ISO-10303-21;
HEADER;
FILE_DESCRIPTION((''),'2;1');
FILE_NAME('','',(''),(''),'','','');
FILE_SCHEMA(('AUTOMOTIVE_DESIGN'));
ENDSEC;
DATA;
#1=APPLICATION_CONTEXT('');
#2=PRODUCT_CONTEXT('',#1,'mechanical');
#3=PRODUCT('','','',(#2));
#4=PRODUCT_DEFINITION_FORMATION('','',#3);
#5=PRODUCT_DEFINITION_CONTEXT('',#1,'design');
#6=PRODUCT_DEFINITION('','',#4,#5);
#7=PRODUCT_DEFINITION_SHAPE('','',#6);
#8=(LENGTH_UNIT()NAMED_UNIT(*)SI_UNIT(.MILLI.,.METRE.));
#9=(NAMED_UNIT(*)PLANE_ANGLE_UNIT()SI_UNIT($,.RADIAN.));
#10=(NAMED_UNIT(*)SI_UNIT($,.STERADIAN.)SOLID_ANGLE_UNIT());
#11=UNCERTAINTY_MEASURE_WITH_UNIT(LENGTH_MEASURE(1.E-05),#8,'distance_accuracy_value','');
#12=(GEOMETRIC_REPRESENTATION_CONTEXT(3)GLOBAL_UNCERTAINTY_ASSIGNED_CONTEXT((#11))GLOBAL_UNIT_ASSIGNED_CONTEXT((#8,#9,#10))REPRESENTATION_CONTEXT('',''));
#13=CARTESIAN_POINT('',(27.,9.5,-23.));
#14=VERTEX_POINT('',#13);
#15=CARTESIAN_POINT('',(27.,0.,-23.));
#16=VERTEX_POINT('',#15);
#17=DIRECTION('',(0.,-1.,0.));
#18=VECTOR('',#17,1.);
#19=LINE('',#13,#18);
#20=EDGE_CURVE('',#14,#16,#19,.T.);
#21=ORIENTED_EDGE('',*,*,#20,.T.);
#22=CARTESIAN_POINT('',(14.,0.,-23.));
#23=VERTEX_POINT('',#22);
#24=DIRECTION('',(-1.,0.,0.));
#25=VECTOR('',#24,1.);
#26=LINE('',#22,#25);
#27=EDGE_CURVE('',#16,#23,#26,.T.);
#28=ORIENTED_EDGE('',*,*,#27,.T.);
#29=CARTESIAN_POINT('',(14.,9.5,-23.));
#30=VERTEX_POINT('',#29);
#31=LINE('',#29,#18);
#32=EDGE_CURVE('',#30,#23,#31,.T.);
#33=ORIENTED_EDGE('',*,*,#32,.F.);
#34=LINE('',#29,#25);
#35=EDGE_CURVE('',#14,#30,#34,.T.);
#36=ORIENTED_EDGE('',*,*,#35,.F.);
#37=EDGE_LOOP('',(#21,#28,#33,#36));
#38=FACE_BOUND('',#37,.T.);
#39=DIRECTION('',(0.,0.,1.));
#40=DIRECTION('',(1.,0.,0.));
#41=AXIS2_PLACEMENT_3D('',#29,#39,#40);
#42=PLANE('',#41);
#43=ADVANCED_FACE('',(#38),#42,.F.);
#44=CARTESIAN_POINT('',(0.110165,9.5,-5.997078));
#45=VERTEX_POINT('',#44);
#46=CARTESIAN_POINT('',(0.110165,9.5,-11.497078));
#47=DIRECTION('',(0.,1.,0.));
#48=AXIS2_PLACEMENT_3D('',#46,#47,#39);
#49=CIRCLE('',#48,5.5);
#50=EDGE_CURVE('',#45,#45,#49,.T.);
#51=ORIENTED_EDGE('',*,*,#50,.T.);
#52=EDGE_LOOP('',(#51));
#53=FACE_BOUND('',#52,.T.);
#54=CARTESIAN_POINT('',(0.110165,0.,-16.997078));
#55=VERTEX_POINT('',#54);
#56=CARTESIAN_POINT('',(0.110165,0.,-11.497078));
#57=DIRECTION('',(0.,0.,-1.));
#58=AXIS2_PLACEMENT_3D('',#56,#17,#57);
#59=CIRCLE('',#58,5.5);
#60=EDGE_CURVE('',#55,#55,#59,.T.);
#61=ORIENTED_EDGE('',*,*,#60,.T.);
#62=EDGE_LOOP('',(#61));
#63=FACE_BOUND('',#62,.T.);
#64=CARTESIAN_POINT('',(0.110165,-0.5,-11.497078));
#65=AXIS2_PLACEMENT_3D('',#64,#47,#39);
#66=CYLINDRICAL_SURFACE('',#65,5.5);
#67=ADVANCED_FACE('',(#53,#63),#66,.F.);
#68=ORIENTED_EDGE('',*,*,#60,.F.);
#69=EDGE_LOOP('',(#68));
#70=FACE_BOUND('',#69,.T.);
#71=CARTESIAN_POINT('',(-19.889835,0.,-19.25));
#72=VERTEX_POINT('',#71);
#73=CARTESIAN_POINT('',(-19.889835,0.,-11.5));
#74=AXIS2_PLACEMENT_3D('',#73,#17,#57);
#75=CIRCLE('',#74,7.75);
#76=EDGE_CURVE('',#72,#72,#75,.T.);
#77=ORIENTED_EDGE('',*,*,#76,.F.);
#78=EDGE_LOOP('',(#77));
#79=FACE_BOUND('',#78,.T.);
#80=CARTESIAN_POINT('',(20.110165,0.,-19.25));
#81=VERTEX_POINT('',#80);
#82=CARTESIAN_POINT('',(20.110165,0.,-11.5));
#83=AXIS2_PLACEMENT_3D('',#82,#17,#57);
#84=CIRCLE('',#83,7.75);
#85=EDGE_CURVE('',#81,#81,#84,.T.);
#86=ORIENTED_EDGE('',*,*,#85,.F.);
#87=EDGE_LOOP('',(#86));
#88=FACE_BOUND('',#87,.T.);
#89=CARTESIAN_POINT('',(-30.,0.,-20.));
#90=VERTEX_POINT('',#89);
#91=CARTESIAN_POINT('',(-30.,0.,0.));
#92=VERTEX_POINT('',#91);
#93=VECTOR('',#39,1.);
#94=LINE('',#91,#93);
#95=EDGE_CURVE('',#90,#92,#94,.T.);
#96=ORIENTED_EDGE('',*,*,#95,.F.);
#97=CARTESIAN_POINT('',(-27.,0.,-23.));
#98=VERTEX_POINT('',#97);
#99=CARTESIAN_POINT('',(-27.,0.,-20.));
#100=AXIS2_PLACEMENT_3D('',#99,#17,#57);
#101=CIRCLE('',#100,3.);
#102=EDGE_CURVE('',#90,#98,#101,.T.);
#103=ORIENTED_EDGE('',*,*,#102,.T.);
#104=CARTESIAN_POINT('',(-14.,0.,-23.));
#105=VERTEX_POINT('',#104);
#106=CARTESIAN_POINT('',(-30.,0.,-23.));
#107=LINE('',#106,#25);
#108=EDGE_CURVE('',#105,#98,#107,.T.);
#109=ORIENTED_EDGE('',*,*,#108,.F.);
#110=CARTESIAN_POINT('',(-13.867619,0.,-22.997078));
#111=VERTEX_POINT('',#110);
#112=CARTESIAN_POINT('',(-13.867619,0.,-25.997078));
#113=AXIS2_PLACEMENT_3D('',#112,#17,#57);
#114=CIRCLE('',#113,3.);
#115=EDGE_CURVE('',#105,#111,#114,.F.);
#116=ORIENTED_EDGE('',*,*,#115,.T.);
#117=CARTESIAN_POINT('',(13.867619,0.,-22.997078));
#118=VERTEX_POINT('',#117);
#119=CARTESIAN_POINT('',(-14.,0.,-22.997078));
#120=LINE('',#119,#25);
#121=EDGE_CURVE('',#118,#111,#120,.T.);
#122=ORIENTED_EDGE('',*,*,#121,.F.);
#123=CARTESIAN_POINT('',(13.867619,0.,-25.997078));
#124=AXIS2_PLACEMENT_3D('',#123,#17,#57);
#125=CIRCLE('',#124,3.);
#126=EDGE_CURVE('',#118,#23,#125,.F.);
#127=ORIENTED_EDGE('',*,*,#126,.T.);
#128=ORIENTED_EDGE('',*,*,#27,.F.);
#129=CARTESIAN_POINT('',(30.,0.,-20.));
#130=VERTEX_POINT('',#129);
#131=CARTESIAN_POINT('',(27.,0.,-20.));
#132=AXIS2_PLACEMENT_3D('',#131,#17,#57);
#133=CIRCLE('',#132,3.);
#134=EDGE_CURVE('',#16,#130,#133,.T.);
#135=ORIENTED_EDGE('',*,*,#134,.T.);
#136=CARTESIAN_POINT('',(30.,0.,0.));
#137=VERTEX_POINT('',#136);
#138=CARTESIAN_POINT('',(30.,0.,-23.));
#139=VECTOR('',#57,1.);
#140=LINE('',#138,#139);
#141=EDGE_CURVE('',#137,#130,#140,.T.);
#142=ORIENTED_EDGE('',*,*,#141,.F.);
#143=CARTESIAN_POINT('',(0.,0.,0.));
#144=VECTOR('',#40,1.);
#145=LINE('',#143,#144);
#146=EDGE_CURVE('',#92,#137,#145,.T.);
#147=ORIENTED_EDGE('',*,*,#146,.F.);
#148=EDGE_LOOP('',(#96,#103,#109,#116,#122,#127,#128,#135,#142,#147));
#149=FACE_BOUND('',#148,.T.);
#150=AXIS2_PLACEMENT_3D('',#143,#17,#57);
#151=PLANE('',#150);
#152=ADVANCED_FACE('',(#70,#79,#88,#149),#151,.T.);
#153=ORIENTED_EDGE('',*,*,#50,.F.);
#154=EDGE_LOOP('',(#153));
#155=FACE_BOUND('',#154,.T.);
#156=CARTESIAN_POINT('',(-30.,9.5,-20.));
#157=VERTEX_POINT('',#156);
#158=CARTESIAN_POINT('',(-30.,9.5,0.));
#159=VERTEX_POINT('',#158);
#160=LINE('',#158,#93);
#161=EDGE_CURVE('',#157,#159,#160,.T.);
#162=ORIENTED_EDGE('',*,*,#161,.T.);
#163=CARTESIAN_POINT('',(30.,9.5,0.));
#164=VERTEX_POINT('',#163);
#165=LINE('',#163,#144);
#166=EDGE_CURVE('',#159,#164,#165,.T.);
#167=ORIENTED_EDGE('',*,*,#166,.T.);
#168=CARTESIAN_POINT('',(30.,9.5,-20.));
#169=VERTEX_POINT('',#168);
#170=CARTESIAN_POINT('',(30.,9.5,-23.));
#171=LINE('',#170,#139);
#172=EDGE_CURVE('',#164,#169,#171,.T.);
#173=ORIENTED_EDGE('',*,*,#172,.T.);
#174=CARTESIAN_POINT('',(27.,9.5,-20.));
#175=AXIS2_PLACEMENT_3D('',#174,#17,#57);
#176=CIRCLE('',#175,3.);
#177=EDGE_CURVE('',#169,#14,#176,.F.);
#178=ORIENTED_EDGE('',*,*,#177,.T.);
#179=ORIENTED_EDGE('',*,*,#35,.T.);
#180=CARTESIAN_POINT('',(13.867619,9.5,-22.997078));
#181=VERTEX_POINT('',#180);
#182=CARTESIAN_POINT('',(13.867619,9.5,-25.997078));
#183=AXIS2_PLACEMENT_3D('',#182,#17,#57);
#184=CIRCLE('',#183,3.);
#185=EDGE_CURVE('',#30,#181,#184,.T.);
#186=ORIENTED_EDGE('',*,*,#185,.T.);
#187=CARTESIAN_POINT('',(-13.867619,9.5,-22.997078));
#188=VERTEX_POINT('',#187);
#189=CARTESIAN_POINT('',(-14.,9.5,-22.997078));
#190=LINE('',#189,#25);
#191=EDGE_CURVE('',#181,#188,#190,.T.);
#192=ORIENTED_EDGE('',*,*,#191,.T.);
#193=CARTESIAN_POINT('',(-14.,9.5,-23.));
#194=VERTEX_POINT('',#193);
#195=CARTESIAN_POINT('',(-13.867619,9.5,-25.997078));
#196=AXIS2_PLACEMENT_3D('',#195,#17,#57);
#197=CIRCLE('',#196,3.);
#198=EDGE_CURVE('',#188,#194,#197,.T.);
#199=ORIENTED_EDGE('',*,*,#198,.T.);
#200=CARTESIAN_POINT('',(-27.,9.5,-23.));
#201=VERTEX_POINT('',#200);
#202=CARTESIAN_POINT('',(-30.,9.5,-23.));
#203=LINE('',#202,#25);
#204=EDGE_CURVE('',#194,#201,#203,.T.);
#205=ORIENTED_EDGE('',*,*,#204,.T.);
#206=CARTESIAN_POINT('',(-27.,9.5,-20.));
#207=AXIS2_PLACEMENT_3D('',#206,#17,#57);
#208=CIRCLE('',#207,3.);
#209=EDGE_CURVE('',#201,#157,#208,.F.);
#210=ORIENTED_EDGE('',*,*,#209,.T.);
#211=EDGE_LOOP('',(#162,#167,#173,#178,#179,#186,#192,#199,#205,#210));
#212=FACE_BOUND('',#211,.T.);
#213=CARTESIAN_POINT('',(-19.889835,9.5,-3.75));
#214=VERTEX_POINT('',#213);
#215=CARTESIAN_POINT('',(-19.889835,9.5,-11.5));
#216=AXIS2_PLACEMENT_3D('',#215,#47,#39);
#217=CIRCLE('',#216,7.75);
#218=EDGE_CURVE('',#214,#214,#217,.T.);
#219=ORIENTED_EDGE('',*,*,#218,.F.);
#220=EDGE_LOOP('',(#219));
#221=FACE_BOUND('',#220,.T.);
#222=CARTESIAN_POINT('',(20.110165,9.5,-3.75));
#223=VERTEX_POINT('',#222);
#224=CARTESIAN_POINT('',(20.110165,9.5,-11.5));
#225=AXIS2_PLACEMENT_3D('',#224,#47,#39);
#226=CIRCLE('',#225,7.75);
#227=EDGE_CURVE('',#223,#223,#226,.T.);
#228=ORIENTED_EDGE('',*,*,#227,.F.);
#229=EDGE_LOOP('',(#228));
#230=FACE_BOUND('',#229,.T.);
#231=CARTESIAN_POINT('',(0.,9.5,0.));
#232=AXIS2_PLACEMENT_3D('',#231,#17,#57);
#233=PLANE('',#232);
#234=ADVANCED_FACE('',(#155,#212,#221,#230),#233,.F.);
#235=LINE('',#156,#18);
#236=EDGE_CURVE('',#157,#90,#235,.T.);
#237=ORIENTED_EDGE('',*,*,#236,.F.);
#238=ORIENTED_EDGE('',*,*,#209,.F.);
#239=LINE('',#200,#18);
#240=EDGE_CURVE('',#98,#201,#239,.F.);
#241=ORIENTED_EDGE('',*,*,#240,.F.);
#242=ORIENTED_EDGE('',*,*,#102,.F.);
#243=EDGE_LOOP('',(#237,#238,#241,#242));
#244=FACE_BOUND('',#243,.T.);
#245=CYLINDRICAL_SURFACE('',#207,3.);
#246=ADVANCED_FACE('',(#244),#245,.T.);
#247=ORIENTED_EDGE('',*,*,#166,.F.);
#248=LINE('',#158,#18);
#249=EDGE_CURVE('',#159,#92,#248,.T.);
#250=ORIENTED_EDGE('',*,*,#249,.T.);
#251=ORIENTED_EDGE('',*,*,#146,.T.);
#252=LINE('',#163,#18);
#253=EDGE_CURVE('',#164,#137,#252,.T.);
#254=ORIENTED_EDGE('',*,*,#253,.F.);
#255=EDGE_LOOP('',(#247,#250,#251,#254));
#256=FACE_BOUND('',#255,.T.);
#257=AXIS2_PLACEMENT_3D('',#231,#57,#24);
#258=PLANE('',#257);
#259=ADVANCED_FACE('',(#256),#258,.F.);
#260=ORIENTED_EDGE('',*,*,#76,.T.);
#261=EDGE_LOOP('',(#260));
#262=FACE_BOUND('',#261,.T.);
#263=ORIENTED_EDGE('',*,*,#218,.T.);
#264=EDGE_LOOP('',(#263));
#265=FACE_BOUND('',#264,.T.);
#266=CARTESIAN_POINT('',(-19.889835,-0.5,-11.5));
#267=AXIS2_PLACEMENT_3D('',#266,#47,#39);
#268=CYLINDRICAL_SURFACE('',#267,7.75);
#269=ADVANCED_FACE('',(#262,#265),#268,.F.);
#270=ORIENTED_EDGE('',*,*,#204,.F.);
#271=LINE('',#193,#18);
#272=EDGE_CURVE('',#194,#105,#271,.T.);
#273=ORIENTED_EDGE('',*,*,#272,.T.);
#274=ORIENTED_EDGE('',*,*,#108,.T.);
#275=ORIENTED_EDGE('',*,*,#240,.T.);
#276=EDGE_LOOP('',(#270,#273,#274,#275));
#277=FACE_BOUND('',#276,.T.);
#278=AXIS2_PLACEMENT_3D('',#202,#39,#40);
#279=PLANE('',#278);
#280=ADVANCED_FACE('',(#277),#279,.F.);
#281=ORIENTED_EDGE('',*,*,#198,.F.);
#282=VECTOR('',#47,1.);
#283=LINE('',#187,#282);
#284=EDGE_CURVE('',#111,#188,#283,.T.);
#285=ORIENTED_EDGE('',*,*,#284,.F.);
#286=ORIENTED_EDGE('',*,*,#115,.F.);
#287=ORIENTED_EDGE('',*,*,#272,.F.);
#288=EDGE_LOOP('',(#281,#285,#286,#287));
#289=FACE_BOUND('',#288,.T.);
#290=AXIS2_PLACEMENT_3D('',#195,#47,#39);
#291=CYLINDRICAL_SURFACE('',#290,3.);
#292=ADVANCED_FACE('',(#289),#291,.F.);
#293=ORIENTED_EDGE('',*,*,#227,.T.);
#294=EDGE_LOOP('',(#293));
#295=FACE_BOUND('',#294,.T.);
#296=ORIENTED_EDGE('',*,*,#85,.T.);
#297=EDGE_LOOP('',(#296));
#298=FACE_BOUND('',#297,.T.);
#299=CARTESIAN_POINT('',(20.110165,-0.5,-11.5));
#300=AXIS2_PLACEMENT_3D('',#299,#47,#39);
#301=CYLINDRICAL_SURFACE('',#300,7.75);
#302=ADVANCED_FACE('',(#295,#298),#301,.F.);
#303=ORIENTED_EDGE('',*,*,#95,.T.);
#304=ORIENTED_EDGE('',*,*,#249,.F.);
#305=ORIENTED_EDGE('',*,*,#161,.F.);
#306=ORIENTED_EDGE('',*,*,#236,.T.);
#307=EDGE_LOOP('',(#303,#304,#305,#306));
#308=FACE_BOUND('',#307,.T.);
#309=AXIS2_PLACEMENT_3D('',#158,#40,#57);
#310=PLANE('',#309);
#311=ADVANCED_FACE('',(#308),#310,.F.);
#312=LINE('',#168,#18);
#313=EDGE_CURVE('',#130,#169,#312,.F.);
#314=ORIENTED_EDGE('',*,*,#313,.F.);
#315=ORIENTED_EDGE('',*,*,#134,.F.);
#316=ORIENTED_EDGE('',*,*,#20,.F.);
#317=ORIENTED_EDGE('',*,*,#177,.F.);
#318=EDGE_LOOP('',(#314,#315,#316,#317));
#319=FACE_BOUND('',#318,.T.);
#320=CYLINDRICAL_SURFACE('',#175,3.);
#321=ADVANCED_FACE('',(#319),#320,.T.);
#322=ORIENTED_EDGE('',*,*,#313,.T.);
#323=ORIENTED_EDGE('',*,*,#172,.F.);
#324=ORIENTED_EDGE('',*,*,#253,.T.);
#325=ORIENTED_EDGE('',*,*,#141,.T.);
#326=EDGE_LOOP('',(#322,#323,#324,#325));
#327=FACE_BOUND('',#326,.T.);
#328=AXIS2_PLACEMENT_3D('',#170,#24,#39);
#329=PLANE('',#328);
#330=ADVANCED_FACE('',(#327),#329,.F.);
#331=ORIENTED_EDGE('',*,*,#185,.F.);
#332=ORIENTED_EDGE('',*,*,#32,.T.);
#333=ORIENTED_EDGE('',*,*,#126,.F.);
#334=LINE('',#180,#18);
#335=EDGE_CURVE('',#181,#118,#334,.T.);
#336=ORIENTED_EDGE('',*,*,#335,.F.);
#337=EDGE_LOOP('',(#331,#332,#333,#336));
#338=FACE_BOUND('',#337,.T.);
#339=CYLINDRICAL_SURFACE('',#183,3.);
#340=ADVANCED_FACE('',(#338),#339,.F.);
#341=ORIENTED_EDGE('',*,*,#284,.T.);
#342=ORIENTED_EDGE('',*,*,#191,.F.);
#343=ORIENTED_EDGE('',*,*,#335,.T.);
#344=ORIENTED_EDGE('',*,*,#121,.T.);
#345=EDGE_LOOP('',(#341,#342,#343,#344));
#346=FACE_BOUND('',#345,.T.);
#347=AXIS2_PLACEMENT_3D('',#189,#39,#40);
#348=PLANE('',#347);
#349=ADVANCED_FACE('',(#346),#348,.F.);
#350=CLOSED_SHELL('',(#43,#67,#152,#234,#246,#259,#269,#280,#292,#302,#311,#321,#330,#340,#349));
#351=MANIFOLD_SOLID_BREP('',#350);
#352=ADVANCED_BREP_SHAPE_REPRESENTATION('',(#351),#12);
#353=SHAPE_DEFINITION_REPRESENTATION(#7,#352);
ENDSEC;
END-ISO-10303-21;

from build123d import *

# Parameters (mm, degrees)
EXTRUDE_1_DEPTH     = 9.5
FILLET_1_R          = 3
SKETCH_2_R          = 7.75
SKETCH_2_R_2        = 5.5
CUT_EXTRUDE_2_DEPTH = 10


with BuildPart() as part:
    # 草图1 → 凸台-拉伸1 (new body)
    with BuildSketch(Plane(origin=(0, 0, 0), x_dir=(1, 0, 0), z_dir=(0, 1, 0))):
        Polygon((0, 0), (-30, 0), (-30, 23), (-14, 23), (-14, 22.997077799), (14, 22.997077799), (14, 23), (30, 23), (30, 0), align=None)
    extrude(amount=EXTRUDE_1_DEPTH)

    # 圆角1
    # the kernel refuses this fillet: 3 mm, written as the material it adds along each edge
    with BuildSketch(Plane(origin=(14, 0, -22.997077799), x_dir=(-2.4315329398816435e-12, 0, -1.0), z_dir=(0, 1, 0))) as fillet_1_piece_1:
        with BuildLine():
            CenterArc((3, 0.132380758), FILLET_1_R, 180, 2.529107474)
            Line((0, 0.132380758), (0, 0))
            Line((0, 0), (0.002922201, 0))
        make_face()
    extrude(amount=9.5)
    with BuildSketch(Plane(origin=(-14, 0, -22.997077799), x_dir=(1, 0, 0), z_dir=(0, 1, 0))) as fillet_1_piece_2:
        with BuildLine():
            CenterArc((0.132380758, 3), FILLET_1_R, 267.470892526, 2.529107474)
            Line((0, 0.002922201), (0, 0))
            Line((0, 0), (0.132380758, 0))
        make_face()
    extrude(amount=9.5)
    # the kernel refuses this fillet: 3 mm, written as the material it takes off along each edge
    with BuildSketch(Plane(origin=(30, -7.5, -23), x_dir=(0, 0, 1), z_dir=(0, 1, 0))) as fillet_1_2_piece_1:
        with BuildLine():
            CenterArc((FILLET_1_R, -FILLET_1_R), FILLET_1_R, 90, 90)
            Line((0, -FILLET_1_R), (0, 0))
            Line((0, 0), (FILLET_1_R, 0))
        make_face()
    extrude(amount=24.5, mode=Mode.SUBTRACT)
    with BuildSketch(Plane(origin=(-30, -7.5, -23), x_dir=(0, 0, 1), z_dir=(0, 1, 0))) as fillet_1_2_piece_2:
        with BuildLine():
            CenterArc((FILLET_1_R, FILLET_1_R), FILLET_1_R, 180, 90)
            Line((0, FILLET_1_R), (0, 0))
            Line((0, 0), (FILLET_1_R, 0))
        make_face()
    extrude(amount=24.5, mode=Mode.SUBTRACT)

    # 草图2 → 切除-拉伸2 (cut)
    with BuildSketch(Plane(origin=(0, 9.5, 0), x_dir=(1, 0, 0), z_dir=(0, 1, 0))):
        with Locations(Location((20.11016513, 11.5, 0), (0, 0, 270))):
            Circle(SKETCH_2_R)
        with Locations(Location((-19.88983487, 11.5, 0), (0, 0, 270))):
            Circle(SKETCH_2_R)
        with Locations(Location((0.11016513, 11.497077799, 0), (0, 0, 270))):
            Circle(SKETCH_2_R_2)
    extrude(amount=-CUT_EXTRUDE_2_DEPTH, mode=Mode.SUBTRACT)


solid = part.part
